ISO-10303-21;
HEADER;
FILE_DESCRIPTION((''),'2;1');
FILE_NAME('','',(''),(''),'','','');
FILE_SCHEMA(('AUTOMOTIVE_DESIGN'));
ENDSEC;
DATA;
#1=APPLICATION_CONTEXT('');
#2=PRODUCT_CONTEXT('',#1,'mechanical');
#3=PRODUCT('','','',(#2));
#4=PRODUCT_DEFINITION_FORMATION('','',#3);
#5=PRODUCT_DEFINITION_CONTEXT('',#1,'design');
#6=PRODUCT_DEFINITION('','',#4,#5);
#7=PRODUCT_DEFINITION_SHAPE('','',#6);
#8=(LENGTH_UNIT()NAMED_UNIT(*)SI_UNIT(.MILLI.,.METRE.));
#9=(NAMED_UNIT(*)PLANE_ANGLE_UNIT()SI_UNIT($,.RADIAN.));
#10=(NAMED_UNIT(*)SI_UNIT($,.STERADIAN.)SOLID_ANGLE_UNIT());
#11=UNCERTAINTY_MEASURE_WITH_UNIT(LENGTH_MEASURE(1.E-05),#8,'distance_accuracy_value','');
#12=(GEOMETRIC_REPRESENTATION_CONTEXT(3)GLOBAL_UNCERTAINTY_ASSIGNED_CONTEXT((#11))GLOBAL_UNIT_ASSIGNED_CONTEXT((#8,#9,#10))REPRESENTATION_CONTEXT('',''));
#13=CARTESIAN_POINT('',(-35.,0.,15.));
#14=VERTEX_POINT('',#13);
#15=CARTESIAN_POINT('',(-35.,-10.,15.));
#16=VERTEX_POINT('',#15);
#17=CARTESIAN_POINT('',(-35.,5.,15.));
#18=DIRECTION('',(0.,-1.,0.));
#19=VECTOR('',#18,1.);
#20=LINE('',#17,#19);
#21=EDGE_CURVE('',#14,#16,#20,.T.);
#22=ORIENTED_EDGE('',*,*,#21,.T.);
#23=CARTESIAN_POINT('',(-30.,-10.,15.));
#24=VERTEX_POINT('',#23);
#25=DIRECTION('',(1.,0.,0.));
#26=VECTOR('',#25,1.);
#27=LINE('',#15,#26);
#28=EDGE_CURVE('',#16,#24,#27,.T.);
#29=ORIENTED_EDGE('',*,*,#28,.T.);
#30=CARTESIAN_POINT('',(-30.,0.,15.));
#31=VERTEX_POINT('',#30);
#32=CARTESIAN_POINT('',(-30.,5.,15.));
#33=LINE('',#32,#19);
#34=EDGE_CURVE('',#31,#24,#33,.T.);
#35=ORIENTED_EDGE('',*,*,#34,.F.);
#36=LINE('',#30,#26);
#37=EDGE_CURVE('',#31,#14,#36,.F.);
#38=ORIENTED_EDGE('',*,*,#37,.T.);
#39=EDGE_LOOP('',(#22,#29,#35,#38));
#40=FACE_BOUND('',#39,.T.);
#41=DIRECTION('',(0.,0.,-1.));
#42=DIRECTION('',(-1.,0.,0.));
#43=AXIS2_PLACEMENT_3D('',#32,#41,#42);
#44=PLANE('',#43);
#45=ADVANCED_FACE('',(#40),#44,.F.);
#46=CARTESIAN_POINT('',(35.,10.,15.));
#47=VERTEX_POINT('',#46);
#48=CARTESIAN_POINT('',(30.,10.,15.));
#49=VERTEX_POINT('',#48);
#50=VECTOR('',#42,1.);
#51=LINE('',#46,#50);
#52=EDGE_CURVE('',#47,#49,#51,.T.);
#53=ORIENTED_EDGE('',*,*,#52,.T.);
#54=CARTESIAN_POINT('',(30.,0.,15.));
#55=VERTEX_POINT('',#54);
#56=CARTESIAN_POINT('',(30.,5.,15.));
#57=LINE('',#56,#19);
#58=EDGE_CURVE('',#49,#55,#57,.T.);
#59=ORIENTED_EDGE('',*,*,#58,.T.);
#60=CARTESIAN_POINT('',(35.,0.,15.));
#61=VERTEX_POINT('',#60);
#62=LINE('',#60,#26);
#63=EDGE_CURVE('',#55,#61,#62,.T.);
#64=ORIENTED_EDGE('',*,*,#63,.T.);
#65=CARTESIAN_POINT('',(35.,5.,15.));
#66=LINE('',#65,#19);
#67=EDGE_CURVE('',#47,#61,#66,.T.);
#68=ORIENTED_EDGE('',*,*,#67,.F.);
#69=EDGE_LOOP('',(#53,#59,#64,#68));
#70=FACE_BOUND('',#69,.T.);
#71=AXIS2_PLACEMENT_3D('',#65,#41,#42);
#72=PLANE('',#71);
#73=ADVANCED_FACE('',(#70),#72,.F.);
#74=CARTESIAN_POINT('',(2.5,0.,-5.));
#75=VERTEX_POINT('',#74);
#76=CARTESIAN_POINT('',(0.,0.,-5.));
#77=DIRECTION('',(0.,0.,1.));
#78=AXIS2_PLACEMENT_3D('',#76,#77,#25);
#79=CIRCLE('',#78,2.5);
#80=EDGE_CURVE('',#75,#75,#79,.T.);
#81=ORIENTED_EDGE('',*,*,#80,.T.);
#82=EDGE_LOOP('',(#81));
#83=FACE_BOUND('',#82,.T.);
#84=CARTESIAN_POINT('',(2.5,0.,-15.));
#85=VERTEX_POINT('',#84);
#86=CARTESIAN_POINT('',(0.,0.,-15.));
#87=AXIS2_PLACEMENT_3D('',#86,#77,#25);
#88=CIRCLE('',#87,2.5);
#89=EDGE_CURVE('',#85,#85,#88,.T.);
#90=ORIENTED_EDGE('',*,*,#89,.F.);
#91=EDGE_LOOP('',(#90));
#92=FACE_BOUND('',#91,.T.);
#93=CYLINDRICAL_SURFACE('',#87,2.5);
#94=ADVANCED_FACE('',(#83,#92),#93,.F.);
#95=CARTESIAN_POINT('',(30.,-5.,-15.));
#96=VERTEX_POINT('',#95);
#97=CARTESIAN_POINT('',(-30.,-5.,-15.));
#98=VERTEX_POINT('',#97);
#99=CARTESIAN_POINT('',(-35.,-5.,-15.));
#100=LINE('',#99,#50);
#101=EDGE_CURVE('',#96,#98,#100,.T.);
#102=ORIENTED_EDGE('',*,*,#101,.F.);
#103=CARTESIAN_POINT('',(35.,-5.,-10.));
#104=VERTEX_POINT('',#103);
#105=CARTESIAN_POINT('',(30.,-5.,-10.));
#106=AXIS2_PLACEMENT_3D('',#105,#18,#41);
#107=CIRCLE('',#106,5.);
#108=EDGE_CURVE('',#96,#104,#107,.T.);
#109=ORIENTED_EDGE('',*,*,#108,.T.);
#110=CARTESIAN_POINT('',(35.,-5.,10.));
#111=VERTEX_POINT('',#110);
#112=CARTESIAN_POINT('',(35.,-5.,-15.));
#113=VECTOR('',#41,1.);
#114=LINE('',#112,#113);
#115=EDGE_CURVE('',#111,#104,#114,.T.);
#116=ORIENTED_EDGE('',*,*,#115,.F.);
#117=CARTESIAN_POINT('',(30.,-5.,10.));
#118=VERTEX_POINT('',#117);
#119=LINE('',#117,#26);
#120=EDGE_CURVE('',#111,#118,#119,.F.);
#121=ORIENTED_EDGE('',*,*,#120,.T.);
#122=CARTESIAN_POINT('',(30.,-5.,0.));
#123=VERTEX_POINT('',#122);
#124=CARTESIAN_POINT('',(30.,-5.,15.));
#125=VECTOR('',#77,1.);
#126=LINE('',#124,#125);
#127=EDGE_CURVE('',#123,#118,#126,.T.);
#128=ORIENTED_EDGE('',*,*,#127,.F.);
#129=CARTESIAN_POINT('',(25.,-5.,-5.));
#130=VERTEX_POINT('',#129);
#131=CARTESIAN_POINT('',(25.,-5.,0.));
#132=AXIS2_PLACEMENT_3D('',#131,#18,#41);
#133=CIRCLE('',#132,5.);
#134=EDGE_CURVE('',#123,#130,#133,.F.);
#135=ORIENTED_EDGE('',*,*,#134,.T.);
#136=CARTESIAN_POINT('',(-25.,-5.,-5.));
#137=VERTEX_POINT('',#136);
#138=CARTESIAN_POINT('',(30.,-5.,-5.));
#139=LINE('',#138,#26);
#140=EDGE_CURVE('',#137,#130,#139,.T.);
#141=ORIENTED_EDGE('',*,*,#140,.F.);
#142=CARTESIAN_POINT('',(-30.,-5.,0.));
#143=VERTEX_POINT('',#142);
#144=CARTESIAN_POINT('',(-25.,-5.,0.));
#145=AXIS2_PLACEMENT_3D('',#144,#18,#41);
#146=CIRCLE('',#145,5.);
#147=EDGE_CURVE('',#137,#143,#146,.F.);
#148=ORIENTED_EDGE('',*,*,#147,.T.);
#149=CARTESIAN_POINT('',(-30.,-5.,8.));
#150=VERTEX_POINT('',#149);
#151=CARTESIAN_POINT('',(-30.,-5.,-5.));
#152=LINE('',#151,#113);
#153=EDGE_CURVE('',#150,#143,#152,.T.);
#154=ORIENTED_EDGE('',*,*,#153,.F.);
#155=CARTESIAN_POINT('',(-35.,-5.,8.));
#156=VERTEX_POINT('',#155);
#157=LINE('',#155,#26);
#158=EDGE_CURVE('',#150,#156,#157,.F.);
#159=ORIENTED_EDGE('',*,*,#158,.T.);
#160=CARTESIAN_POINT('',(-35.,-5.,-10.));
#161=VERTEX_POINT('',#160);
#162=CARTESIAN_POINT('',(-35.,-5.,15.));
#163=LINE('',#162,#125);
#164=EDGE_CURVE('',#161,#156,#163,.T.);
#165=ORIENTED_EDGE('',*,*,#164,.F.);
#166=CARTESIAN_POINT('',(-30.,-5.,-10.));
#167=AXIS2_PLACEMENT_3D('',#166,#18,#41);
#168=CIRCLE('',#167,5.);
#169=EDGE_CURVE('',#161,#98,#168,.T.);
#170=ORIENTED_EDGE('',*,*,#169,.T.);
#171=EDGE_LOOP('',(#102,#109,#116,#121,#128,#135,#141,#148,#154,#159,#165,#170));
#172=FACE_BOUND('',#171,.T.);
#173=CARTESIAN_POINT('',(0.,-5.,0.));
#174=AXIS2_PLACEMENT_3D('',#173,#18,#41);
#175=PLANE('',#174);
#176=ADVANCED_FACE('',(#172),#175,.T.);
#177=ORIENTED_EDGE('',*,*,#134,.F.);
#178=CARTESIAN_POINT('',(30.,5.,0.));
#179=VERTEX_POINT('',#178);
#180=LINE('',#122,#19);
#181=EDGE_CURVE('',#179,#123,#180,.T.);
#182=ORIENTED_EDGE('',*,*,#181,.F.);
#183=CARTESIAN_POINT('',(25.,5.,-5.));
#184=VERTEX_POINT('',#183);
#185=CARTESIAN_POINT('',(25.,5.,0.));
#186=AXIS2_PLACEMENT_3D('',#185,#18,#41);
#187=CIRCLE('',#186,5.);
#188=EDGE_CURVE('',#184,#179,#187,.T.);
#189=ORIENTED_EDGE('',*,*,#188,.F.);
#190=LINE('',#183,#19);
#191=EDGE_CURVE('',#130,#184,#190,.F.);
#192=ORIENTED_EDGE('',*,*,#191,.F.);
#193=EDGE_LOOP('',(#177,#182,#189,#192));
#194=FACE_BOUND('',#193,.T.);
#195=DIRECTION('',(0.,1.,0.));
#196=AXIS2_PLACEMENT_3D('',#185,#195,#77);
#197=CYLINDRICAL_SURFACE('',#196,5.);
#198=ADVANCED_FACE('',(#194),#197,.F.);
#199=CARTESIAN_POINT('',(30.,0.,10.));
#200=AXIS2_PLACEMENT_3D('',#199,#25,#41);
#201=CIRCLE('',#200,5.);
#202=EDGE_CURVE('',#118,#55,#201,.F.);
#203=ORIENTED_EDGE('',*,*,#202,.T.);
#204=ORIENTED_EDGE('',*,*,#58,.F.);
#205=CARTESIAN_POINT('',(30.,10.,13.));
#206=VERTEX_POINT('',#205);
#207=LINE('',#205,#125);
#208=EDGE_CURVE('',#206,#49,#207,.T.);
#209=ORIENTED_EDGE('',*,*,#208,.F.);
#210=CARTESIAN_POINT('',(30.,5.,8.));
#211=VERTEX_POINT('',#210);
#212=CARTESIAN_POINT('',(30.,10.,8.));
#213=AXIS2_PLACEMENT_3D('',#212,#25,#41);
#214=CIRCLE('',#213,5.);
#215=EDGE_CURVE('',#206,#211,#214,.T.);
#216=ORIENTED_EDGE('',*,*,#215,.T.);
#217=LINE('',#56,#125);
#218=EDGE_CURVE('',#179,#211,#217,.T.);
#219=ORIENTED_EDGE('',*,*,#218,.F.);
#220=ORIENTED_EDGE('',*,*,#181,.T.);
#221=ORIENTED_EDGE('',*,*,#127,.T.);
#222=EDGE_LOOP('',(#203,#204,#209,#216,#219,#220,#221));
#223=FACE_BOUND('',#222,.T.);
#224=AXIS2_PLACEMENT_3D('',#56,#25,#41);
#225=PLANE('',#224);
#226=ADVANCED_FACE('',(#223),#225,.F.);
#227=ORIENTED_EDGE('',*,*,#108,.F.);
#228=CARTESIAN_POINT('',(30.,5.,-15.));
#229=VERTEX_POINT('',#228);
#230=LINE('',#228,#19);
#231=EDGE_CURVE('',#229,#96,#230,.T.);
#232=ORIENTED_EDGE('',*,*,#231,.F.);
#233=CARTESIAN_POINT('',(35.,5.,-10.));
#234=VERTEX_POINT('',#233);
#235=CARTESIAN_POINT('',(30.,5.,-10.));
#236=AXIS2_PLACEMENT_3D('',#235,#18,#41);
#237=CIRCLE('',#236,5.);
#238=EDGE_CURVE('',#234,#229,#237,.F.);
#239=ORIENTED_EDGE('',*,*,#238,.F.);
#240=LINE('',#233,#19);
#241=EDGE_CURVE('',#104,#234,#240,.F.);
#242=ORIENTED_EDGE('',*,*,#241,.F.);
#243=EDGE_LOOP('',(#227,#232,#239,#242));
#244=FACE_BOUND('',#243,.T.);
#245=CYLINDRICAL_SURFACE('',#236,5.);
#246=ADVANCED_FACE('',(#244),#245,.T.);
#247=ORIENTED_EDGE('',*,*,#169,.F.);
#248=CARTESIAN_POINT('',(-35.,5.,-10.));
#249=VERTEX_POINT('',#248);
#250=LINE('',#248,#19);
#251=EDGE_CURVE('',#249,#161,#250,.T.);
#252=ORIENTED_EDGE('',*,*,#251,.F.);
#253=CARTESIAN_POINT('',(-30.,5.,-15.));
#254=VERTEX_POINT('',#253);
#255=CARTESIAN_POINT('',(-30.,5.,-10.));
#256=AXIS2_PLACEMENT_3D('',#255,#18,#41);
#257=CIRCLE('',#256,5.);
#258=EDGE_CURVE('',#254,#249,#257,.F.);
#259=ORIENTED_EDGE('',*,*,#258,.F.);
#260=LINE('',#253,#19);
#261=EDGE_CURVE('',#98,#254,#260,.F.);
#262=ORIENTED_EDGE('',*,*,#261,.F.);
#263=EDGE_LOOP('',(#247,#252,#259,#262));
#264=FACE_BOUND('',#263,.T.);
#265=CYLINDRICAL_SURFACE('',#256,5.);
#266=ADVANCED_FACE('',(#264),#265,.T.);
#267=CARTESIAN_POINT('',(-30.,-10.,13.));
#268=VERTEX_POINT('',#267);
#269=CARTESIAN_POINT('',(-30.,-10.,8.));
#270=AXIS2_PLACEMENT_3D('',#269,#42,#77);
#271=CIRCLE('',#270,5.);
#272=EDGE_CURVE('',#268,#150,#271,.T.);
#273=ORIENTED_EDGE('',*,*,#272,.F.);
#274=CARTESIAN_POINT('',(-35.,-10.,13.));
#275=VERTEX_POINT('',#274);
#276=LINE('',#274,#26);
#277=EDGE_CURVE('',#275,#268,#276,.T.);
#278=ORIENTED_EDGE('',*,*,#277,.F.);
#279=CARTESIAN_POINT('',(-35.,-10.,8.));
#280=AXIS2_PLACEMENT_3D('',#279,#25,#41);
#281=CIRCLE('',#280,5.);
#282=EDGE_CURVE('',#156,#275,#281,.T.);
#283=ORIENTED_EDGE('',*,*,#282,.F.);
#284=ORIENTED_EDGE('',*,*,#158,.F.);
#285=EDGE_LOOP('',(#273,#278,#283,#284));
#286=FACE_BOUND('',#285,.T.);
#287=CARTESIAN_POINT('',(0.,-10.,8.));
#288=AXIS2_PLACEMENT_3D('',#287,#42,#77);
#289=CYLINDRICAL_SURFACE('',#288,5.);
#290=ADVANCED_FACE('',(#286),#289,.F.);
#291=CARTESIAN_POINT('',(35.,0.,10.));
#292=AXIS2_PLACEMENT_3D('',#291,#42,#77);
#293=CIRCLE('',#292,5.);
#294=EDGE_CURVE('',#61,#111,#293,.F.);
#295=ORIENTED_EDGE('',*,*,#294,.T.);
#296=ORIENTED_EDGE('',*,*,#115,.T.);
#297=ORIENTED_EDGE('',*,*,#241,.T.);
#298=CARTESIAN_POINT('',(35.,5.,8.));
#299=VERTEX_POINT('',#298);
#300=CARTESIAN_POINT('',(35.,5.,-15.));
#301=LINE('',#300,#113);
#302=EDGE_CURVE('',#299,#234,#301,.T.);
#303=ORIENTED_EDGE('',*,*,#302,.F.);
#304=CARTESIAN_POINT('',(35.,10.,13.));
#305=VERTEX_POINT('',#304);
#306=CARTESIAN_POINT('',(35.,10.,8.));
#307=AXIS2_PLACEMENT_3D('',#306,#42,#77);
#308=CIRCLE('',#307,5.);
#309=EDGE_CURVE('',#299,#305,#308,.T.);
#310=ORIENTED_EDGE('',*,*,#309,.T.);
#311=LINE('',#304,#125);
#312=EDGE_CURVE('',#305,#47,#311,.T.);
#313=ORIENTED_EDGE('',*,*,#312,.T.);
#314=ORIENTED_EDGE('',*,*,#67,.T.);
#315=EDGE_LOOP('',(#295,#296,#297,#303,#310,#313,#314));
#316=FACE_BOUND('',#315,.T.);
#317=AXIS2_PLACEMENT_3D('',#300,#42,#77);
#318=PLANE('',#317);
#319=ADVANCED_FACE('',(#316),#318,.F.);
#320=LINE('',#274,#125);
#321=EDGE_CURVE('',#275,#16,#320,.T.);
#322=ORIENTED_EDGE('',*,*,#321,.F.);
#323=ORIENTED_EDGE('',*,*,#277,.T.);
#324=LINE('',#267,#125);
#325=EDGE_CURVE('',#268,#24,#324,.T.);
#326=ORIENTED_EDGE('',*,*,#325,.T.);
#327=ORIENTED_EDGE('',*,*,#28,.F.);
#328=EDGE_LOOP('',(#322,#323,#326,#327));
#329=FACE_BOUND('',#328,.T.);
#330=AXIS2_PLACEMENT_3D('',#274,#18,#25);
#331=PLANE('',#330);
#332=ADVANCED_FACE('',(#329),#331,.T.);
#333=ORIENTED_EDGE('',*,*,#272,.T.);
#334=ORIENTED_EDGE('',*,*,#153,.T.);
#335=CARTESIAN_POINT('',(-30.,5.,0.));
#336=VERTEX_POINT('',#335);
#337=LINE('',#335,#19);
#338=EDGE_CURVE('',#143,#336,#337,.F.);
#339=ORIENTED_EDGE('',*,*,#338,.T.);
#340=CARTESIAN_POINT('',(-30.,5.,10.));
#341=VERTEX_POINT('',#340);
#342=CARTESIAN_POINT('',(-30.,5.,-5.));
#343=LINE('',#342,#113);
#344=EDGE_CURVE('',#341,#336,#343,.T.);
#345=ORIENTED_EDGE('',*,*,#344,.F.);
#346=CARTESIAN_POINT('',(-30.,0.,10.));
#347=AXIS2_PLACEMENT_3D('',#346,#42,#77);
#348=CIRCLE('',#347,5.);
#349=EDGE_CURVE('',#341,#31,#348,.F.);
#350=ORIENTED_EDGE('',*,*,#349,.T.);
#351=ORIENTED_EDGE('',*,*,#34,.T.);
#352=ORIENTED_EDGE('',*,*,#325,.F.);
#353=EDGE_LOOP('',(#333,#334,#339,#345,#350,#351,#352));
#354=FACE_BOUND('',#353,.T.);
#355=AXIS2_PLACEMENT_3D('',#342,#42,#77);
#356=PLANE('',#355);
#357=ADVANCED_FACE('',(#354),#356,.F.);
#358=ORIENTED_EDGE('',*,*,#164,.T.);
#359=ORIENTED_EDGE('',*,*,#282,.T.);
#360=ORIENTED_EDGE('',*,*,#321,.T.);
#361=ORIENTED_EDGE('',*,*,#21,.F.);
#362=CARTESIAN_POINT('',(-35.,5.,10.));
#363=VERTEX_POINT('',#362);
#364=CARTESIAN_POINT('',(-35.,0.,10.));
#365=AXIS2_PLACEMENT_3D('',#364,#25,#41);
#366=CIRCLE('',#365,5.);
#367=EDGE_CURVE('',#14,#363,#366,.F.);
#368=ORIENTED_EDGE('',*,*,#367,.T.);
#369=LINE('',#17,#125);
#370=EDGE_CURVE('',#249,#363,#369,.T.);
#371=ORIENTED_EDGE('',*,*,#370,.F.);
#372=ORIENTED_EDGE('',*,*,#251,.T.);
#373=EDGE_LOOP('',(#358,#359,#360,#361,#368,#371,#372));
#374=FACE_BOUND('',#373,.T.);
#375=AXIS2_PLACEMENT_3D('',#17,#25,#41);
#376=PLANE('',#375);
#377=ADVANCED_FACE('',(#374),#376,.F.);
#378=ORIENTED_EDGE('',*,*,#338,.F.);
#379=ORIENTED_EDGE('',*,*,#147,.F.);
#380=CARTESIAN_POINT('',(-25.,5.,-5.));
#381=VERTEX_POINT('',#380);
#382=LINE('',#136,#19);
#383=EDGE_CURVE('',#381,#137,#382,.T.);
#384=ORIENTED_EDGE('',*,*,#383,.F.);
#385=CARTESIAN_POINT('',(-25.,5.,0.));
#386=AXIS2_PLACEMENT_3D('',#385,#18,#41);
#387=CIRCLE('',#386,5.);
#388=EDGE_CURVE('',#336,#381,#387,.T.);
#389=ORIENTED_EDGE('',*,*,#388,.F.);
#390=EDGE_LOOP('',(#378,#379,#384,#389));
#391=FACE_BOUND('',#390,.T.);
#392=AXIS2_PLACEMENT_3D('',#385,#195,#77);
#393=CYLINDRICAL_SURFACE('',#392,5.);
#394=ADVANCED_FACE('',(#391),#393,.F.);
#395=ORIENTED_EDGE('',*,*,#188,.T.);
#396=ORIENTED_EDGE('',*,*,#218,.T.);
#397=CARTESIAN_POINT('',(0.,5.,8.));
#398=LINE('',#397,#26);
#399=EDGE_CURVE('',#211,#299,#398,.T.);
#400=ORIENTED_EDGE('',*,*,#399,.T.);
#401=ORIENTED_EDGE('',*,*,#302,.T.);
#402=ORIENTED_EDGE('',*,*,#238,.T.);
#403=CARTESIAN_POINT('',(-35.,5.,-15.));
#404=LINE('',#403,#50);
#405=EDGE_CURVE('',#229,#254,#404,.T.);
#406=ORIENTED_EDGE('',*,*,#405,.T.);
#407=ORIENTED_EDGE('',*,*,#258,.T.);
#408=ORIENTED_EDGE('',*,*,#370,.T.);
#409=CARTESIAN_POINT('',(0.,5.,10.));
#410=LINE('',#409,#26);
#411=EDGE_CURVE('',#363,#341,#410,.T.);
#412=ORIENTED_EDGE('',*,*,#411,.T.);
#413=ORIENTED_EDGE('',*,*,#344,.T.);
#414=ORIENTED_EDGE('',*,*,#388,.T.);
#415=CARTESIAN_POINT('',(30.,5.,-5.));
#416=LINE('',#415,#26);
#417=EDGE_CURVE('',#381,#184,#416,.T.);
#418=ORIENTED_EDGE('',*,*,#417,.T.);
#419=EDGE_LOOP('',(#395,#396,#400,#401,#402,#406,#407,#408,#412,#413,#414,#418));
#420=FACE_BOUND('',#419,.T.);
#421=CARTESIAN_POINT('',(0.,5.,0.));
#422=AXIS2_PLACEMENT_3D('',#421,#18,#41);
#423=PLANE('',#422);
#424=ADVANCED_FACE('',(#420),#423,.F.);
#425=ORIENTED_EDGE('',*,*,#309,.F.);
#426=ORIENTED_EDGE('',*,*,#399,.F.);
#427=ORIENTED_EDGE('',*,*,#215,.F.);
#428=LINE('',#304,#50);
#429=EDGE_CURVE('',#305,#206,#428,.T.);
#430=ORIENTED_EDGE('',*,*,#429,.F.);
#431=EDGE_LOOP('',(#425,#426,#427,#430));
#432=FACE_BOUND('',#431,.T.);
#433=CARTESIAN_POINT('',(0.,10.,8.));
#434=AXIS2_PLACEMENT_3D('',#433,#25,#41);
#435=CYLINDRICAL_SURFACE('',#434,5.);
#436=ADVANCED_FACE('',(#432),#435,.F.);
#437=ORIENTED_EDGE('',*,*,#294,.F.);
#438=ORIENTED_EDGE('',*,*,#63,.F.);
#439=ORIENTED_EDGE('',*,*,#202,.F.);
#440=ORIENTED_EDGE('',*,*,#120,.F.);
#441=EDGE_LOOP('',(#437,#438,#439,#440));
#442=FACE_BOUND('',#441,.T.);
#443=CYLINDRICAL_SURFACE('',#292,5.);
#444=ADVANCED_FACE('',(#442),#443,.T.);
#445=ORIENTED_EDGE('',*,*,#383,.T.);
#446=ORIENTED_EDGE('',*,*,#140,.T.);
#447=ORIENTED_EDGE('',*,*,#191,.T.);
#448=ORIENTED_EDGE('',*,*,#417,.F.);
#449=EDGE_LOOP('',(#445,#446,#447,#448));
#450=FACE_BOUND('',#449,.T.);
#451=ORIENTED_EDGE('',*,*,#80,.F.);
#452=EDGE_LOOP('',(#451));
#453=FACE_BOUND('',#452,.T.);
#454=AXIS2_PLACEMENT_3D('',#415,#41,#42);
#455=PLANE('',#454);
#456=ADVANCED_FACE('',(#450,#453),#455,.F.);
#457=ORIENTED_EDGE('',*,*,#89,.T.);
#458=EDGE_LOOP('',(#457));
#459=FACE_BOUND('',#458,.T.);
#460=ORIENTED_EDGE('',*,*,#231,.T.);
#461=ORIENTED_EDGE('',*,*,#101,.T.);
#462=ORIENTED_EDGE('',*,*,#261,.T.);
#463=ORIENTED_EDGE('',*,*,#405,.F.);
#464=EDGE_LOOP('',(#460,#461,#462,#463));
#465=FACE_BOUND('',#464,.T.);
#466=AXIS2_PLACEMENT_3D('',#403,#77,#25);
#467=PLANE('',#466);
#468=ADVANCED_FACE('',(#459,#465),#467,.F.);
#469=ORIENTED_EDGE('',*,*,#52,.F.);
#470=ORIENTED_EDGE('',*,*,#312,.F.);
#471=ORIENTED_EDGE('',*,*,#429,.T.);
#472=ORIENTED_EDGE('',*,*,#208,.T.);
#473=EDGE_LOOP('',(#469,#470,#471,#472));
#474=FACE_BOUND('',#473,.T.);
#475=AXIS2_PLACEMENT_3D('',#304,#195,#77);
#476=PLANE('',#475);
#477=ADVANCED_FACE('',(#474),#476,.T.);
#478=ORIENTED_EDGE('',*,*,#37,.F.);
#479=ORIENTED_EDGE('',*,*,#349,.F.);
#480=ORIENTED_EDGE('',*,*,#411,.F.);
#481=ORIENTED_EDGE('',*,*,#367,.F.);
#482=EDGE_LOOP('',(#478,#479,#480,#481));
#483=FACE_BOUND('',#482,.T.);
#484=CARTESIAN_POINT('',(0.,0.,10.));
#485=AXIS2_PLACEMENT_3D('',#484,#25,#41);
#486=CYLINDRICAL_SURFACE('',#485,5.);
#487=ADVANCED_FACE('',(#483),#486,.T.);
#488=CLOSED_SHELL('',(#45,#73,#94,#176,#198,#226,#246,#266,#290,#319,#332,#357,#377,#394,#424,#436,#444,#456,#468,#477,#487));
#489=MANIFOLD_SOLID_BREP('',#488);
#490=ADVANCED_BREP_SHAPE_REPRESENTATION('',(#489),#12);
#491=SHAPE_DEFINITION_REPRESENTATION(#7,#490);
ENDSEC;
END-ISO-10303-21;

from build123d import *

# Parameters (mm, degrees)
BOSS_EXTRUDE1_DEPTH = 5
SKETCH2_R           = 2.5
CUT_EXTRUDE1_DEPTH  = 41.620192023
SKETCH3_W           = 5
SKETCH3_H           = 15
BOSS_EXTRUDE2_DEPTH = 2
FILLET1_START       = -35
FILLET1_DEPTH       = 5
FILLET1_START_2     = 30
FILLET1_2_DEPTH     = 5
FILLET1_START_3     = -5
FILLET1_3_DEPTH     = 10
FILLET1_4_DEPTH     = 5
FILLET1_5_DEPTH     = 5
FILLET1_6_DEPTH     = 10


with BuildPart() as part:
    # Sketch1 → Boss-Extrude1 (new, symmetric)
    with BuildSketch(Plane(origin=(0, 0, 0), x_dir=(1, 0, 0), z_dir=(0, 1, 0))):
        Polygon((-35, 15), (35, 15), (35, -15), (30, -15), (30, 5), (-30, 5), (-30, -15), (-35, -15), align=None)
    extrude(amount=BOSS_EXTRUDE1_DEPTH, both=True)

    # Sketch2 → Cut-Extrude1 (cut, through all)
    with BuildSketch(Plane.XY.offset(-5)):
        Circle(SKETCH2_R)
    extrude(amount=-CUT_EXTRUDE1_DEPTH, mode=Mode.SUBTRACT)

    # Sketch3 → Boss-Extrude2 (add)
    with BuildSketch(Plane.XY.offset(15)):
        with Locations((-32.5, -2.5)):
            Rectangle(SKETCH3_W, SKETCH3_H)
        with Locations((32.5, 2.5)):
            Rectangle(SKETCH3_W, SKETCH3_H)
    extrude(amount=-BOSS_EXTRUDE2_DEPTH)

    # Fillet1: read off the stored shape, not the designer's step
    # Fillet1 outline → Fillet1 (add)
    with BuildSketch(Plane.YZ.offset(FILLET1_START)):
        with BuildLine():
            Line((-5, 13), (-10, 13))
            ThreePointArc((-10, 13), (-6.464466094, 11.535533906), (-5, 8))
            Line((-5, 8), (-5, 13))
        make_face()
    extrude(amount=FILLET1_DEPTH)

    # Fillet1 2 outline → Fillet1 2 (add)
    with BuildSketch(Plane.YZ.offset(FILLET1_START_2)):
        with BuildLine():
            Line((5, 13), (5, 8))
            ThreePointArc((5, 8), (6.464466094, 11.535533906), (10, 13))
            Line((10, 13), (5, 13))
        make_face()
    extrude(amount=FILLET1_2_DEPTH)

    # Fillet1 3 outline → Fillet1 3 (add)
    with BuildSketch(Plane(origin=(0, 0, 0), x_dir=(1, 0, 0), z_dir=(0, 1, 0)).offset(FILLET1_START_3)):
        with BuildLine():
            Line((-30, 5), (-30, 0))
            ThreePointArc((-30, 0), (-28.535533906, 3.535533906), (-25, 5))
            Line((-25, 5), (-30, 5))
        make_face()
        with BuildLine():
            Line((30, 5), (25, 5))
            ThreePointArc((25, 5), (28.535533906, 3.535533906), (30, 0))
            Line((30, 0), (30, 5))
        make_face()
    extrude(amount=FILLET1_3_DEPTH)

    # Fillet1 4 outline → Fillet1 4 (cut)
    with BuildSketch(Plane.YZ.offset(FILLET1_START)):
        with BuildLine():
            Line((5, 15), (0, 15))
            ThreePointArc((0, 15), (3.535533906, 13.535533906), (5, 10))
            Line((5, 10), (5, 15))
        make_face()
    extrude(amount=FILLET1_4_DEPTH, mode=Mode.SUBTRACT)

    # Fillet1 5 outline → Fillet1 5 (cut)
    with BuildSketch(Plane.YZ.offset(FILLET1_START_2)):
        with BuildLine():
            Line((-5, 15), (-5, 10))
            ThreePointArc((-5, 10), (-3.535533906, 13.535533906), (0, 15))
            Line((0, 15), (-5, 15))
        make_face()
    extrude(amount=FILLET1_5_DEPTH, mode=Mode.SUBTRACT)

    # Fillet1 6 outline → Fillet1 6 (cut)
    with BuildSketch(Plane(origin=(0, 0, 0), x_dir=(1, 0, 0), z_dir=(0, 1, 0)).offset(FILLET1_START_3)):
        with BuildLine():
            Line((-35, 15), (-35, 10))
            ThreePointArc((-35, 10), (-33.535533906, 13.535533906), (-30, 15))
            Line((-30, 15), (-35, 15))
        make_face()
        with BuildLine():
            Line((35, 15), (30, 15))
            ThreePointArc((30, 15), (33.535533906, 13.535533906), (35, 10))
            Line((35, 10), (35, 15))
        make_face()
    extrude(amount=FILLET1_6_DEPTH, mode=Mode.SUBTRACT)


solid = part.part
